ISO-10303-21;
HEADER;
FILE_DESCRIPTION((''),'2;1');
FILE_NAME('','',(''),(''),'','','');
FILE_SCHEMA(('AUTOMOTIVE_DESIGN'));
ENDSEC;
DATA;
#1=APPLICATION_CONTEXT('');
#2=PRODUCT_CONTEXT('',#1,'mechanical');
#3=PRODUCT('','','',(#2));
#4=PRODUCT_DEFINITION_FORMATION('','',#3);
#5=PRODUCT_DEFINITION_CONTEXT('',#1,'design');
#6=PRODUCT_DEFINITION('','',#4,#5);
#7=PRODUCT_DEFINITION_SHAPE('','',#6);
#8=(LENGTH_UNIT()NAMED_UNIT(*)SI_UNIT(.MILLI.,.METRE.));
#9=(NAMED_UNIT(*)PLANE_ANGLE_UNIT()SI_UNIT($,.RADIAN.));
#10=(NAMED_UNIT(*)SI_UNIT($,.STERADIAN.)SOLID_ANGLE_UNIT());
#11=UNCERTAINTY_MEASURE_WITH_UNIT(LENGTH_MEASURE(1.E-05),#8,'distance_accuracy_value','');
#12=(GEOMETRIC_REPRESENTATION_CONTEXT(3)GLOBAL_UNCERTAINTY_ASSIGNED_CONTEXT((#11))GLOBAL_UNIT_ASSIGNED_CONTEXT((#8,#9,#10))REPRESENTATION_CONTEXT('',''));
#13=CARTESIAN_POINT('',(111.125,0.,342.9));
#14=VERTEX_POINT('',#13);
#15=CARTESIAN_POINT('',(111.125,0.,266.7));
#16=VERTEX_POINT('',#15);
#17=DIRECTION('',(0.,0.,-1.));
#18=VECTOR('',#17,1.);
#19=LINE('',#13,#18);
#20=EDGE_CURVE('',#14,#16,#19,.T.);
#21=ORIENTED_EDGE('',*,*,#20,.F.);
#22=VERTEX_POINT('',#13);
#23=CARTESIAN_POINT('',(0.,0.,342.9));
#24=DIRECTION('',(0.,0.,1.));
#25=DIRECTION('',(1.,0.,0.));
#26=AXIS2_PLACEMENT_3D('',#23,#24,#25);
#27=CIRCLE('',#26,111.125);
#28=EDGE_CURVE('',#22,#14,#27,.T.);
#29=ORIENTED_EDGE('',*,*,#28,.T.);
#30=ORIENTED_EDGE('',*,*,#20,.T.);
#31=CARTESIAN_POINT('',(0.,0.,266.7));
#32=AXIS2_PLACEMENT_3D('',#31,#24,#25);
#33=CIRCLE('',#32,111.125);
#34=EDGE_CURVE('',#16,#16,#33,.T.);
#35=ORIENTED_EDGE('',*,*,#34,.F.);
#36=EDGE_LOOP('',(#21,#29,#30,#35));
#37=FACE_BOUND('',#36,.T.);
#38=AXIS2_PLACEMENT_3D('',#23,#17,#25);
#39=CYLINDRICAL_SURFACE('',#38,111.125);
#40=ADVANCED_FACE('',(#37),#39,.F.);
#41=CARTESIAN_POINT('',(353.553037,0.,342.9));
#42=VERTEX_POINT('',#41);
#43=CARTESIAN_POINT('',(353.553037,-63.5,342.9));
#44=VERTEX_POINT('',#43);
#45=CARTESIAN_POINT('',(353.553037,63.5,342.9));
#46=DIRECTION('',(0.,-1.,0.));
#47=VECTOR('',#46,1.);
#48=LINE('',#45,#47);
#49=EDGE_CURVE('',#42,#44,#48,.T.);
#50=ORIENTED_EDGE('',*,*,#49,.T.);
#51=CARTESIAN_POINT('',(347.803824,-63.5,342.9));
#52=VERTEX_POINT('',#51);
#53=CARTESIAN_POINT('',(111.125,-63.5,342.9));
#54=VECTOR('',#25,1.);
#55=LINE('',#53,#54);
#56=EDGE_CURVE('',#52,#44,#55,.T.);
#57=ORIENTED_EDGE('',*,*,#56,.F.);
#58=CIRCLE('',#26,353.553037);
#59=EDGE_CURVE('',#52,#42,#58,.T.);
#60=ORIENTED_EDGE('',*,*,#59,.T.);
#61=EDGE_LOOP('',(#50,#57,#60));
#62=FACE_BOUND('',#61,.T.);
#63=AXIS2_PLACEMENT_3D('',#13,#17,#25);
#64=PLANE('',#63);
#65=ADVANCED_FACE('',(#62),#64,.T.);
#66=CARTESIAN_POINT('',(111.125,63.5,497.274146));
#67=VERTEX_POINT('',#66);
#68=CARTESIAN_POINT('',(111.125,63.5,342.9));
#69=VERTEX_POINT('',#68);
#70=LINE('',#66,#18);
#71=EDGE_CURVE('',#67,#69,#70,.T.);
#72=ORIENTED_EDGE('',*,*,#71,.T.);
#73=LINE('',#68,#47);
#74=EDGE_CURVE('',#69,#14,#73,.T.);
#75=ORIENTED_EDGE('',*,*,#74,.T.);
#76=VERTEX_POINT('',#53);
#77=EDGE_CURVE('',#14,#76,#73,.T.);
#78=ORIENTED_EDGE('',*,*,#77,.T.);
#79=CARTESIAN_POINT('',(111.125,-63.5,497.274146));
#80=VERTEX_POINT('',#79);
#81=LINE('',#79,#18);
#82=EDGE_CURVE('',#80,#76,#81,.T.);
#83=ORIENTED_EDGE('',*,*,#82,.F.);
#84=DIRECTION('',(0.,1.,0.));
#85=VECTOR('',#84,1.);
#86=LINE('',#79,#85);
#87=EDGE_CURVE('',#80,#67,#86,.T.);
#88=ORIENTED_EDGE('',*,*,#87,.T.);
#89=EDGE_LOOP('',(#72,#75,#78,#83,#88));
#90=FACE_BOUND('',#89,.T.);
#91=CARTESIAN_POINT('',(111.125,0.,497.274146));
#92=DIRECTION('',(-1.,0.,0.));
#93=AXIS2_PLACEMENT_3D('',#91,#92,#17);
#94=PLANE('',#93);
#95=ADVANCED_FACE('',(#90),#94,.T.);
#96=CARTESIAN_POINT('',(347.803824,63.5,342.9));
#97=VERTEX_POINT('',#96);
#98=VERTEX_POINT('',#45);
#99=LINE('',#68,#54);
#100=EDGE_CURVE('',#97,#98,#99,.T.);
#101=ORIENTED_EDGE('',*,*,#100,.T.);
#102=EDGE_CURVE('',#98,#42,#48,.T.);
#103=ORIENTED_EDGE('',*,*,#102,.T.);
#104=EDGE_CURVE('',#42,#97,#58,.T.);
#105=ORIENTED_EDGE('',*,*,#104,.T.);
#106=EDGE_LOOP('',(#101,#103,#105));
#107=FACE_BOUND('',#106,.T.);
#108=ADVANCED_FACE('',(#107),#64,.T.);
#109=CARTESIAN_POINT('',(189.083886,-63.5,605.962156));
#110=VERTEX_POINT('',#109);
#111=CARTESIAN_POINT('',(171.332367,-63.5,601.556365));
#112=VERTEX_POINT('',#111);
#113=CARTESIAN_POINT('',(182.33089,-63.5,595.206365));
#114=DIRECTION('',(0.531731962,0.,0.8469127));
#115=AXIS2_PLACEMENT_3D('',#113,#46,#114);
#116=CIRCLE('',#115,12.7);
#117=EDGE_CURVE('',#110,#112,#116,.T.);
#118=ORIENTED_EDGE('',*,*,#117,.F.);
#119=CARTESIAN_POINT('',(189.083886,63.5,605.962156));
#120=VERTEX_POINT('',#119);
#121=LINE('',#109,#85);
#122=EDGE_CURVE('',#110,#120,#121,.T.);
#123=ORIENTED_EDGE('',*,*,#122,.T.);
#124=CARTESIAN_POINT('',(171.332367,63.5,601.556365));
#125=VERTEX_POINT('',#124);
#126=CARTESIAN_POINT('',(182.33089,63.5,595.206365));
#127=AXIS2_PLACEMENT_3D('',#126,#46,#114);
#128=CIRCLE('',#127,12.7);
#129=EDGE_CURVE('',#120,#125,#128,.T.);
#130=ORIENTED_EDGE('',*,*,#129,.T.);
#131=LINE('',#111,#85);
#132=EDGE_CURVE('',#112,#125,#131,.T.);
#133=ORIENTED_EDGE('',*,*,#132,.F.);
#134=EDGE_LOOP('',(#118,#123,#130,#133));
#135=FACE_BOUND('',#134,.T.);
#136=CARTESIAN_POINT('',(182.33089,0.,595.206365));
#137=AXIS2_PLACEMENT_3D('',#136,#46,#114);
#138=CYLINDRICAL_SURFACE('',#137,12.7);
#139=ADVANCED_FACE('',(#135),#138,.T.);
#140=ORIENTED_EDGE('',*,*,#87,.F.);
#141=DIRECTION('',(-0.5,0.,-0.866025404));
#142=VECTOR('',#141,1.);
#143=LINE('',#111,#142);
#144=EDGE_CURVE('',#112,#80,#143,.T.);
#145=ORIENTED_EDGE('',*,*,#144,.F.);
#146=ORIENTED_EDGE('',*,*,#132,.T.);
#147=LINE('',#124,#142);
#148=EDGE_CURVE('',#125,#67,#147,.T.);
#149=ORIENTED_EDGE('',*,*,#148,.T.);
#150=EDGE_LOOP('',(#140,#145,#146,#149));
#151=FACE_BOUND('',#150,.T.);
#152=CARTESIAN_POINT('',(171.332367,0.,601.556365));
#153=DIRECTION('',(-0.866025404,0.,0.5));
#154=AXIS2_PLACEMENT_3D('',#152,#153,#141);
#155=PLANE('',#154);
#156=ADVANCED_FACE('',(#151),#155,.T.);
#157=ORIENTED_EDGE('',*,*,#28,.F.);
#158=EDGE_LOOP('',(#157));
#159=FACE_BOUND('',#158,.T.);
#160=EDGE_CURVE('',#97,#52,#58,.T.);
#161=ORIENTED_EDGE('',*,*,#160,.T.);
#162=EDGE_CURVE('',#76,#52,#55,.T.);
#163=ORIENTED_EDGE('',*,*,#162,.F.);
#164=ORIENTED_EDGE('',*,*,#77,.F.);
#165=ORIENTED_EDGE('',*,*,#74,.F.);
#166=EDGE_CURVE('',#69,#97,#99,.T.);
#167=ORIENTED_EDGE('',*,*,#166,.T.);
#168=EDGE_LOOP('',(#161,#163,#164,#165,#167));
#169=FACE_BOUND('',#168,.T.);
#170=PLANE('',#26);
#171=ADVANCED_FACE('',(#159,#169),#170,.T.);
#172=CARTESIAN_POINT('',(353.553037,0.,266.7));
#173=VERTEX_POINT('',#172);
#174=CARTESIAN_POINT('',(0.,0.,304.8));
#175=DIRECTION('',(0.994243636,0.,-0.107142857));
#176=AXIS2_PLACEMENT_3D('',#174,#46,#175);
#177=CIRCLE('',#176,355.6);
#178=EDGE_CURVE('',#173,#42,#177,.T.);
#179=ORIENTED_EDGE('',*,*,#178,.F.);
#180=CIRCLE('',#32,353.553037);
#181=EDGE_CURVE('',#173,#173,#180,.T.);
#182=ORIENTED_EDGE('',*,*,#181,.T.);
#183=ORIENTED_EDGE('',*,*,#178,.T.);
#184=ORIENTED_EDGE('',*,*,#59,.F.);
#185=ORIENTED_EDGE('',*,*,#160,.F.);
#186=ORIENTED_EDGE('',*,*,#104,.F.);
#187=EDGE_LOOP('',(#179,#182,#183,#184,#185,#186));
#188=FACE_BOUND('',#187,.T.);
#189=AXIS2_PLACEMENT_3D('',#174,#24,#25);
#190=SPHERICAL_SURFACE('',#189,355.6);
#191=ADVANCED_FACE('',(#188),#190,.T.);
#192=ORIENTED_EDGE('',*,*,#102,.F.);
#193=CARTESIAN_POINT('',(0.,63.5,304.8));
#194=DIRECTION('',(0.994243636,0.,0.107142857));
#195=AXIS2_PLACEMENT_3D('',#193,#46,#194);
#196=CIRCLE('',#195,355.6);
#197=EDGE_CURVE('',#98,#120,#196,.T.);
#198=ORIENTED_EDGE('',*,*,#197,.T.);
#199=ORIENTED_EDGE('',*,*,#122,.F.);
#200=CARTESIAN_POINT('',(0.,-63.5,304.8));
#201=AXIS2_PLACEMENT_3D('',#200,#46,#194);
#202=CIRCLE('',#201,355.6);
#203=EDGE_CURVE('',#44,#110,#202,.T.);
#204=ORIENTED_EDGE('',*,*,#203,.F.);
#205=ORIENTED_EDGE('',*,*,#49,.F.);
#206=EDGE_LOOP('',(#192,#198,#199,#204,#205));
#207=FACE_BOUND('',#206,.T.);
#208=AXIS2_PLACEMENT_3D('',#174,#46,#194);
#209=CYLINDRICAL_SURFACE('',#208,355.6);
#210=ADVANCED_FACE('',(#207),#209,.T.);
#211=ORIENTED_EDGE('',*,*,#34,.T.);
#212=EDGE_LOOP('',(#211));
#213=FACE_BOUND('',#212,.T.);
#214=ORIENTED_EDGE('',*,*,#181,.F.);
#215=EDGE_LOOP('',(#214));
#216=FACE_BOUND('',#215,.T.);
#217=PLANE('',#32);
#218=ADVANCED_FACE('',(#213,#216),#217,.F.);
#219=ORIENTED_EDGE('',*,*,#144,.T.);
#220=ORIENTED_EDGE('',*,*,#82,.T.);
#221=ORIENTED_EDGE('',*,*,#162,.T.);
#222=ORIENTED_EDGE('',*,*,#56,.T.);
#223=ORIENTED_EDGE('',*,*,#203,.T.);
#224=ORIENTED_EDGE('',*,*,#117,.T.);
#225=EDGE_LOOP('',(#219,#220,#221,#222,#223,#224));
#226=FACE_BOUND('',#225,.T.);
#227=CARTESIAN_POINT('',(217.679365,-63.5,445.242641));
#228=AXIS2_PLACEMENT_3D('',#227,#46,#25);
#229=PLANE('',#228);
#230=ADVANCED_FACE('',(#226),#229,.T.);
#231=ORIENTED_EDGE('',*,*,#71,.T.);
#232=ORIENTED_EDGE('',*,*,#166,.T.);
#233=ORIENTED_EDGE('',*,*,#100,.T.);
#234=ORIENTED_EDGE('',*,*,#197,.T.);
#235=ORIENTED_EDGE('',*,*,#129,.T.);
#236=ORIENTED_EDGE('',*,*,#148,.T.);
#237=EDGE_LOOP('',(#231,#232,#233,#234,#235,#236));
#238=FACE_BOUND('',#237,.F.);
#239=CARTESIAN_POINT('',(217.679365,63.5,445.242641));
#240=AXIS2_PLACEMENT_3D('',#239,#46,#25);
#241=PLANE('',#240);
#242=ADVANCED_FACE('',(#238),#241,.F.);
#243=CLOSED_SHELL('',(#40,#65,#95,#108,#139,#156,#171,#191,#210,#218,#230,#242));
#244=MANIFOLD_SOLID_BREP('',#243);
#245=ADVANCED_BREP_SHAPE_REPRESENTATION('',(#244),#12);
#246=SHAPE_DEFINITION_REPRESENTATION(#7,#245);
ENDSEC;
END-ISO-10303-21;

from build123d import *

# Parameters (mm, degrees)
F2_DEPTH = 63.5


# Not quite as in the source:
# - a feature names something its author has since deleted; it is built from what else it names


with BuildPart() as f1:
    # F0 (on Front) → F1 (revolve)
    with BuildSketch(Plane.XZ):
        with BuildLine():
            Line((353.5530370397, 342.9), (111.125, 342.9))
            Line((111.125, 342.9), (111.125, 266.7))
            Line((111.125, 266.7), (353.5530370397, 266.7))
            ThreePointArc((353.5530370397, 266.7), (355.6, 304.8), (353.5530370397, 342.9))
        make_face()
    revolve(axis=Axis((0, 0, 509.3539357185), (0, 0, 1)))

    # F0 (on Front) → F2 (join, symmetric)
    with BuildSketch(Plane.XZ):
        with BuildLine():
            Line((111.125, 497.2741459911), (111.125, 342.9))
            Line((111.125, 342.9), (353.5530370397, 342.9))
            ThreePointArc((353.5530370397, 342.9), (301.5197040525, 493.3132039623), (189.0838855952, 605.9621560027))
            ThreePointArc((189.0838855952, 605.9621560027), (179.2716620853, 607.5323992178), (171.332367053, 601.5563647169))
            Line((171.332367053, 601.5563647169), (111.125, 497.2741459911))
        make_face()
    extrude(amount=F2_DEPTH, both=True)


solid = f1.part
